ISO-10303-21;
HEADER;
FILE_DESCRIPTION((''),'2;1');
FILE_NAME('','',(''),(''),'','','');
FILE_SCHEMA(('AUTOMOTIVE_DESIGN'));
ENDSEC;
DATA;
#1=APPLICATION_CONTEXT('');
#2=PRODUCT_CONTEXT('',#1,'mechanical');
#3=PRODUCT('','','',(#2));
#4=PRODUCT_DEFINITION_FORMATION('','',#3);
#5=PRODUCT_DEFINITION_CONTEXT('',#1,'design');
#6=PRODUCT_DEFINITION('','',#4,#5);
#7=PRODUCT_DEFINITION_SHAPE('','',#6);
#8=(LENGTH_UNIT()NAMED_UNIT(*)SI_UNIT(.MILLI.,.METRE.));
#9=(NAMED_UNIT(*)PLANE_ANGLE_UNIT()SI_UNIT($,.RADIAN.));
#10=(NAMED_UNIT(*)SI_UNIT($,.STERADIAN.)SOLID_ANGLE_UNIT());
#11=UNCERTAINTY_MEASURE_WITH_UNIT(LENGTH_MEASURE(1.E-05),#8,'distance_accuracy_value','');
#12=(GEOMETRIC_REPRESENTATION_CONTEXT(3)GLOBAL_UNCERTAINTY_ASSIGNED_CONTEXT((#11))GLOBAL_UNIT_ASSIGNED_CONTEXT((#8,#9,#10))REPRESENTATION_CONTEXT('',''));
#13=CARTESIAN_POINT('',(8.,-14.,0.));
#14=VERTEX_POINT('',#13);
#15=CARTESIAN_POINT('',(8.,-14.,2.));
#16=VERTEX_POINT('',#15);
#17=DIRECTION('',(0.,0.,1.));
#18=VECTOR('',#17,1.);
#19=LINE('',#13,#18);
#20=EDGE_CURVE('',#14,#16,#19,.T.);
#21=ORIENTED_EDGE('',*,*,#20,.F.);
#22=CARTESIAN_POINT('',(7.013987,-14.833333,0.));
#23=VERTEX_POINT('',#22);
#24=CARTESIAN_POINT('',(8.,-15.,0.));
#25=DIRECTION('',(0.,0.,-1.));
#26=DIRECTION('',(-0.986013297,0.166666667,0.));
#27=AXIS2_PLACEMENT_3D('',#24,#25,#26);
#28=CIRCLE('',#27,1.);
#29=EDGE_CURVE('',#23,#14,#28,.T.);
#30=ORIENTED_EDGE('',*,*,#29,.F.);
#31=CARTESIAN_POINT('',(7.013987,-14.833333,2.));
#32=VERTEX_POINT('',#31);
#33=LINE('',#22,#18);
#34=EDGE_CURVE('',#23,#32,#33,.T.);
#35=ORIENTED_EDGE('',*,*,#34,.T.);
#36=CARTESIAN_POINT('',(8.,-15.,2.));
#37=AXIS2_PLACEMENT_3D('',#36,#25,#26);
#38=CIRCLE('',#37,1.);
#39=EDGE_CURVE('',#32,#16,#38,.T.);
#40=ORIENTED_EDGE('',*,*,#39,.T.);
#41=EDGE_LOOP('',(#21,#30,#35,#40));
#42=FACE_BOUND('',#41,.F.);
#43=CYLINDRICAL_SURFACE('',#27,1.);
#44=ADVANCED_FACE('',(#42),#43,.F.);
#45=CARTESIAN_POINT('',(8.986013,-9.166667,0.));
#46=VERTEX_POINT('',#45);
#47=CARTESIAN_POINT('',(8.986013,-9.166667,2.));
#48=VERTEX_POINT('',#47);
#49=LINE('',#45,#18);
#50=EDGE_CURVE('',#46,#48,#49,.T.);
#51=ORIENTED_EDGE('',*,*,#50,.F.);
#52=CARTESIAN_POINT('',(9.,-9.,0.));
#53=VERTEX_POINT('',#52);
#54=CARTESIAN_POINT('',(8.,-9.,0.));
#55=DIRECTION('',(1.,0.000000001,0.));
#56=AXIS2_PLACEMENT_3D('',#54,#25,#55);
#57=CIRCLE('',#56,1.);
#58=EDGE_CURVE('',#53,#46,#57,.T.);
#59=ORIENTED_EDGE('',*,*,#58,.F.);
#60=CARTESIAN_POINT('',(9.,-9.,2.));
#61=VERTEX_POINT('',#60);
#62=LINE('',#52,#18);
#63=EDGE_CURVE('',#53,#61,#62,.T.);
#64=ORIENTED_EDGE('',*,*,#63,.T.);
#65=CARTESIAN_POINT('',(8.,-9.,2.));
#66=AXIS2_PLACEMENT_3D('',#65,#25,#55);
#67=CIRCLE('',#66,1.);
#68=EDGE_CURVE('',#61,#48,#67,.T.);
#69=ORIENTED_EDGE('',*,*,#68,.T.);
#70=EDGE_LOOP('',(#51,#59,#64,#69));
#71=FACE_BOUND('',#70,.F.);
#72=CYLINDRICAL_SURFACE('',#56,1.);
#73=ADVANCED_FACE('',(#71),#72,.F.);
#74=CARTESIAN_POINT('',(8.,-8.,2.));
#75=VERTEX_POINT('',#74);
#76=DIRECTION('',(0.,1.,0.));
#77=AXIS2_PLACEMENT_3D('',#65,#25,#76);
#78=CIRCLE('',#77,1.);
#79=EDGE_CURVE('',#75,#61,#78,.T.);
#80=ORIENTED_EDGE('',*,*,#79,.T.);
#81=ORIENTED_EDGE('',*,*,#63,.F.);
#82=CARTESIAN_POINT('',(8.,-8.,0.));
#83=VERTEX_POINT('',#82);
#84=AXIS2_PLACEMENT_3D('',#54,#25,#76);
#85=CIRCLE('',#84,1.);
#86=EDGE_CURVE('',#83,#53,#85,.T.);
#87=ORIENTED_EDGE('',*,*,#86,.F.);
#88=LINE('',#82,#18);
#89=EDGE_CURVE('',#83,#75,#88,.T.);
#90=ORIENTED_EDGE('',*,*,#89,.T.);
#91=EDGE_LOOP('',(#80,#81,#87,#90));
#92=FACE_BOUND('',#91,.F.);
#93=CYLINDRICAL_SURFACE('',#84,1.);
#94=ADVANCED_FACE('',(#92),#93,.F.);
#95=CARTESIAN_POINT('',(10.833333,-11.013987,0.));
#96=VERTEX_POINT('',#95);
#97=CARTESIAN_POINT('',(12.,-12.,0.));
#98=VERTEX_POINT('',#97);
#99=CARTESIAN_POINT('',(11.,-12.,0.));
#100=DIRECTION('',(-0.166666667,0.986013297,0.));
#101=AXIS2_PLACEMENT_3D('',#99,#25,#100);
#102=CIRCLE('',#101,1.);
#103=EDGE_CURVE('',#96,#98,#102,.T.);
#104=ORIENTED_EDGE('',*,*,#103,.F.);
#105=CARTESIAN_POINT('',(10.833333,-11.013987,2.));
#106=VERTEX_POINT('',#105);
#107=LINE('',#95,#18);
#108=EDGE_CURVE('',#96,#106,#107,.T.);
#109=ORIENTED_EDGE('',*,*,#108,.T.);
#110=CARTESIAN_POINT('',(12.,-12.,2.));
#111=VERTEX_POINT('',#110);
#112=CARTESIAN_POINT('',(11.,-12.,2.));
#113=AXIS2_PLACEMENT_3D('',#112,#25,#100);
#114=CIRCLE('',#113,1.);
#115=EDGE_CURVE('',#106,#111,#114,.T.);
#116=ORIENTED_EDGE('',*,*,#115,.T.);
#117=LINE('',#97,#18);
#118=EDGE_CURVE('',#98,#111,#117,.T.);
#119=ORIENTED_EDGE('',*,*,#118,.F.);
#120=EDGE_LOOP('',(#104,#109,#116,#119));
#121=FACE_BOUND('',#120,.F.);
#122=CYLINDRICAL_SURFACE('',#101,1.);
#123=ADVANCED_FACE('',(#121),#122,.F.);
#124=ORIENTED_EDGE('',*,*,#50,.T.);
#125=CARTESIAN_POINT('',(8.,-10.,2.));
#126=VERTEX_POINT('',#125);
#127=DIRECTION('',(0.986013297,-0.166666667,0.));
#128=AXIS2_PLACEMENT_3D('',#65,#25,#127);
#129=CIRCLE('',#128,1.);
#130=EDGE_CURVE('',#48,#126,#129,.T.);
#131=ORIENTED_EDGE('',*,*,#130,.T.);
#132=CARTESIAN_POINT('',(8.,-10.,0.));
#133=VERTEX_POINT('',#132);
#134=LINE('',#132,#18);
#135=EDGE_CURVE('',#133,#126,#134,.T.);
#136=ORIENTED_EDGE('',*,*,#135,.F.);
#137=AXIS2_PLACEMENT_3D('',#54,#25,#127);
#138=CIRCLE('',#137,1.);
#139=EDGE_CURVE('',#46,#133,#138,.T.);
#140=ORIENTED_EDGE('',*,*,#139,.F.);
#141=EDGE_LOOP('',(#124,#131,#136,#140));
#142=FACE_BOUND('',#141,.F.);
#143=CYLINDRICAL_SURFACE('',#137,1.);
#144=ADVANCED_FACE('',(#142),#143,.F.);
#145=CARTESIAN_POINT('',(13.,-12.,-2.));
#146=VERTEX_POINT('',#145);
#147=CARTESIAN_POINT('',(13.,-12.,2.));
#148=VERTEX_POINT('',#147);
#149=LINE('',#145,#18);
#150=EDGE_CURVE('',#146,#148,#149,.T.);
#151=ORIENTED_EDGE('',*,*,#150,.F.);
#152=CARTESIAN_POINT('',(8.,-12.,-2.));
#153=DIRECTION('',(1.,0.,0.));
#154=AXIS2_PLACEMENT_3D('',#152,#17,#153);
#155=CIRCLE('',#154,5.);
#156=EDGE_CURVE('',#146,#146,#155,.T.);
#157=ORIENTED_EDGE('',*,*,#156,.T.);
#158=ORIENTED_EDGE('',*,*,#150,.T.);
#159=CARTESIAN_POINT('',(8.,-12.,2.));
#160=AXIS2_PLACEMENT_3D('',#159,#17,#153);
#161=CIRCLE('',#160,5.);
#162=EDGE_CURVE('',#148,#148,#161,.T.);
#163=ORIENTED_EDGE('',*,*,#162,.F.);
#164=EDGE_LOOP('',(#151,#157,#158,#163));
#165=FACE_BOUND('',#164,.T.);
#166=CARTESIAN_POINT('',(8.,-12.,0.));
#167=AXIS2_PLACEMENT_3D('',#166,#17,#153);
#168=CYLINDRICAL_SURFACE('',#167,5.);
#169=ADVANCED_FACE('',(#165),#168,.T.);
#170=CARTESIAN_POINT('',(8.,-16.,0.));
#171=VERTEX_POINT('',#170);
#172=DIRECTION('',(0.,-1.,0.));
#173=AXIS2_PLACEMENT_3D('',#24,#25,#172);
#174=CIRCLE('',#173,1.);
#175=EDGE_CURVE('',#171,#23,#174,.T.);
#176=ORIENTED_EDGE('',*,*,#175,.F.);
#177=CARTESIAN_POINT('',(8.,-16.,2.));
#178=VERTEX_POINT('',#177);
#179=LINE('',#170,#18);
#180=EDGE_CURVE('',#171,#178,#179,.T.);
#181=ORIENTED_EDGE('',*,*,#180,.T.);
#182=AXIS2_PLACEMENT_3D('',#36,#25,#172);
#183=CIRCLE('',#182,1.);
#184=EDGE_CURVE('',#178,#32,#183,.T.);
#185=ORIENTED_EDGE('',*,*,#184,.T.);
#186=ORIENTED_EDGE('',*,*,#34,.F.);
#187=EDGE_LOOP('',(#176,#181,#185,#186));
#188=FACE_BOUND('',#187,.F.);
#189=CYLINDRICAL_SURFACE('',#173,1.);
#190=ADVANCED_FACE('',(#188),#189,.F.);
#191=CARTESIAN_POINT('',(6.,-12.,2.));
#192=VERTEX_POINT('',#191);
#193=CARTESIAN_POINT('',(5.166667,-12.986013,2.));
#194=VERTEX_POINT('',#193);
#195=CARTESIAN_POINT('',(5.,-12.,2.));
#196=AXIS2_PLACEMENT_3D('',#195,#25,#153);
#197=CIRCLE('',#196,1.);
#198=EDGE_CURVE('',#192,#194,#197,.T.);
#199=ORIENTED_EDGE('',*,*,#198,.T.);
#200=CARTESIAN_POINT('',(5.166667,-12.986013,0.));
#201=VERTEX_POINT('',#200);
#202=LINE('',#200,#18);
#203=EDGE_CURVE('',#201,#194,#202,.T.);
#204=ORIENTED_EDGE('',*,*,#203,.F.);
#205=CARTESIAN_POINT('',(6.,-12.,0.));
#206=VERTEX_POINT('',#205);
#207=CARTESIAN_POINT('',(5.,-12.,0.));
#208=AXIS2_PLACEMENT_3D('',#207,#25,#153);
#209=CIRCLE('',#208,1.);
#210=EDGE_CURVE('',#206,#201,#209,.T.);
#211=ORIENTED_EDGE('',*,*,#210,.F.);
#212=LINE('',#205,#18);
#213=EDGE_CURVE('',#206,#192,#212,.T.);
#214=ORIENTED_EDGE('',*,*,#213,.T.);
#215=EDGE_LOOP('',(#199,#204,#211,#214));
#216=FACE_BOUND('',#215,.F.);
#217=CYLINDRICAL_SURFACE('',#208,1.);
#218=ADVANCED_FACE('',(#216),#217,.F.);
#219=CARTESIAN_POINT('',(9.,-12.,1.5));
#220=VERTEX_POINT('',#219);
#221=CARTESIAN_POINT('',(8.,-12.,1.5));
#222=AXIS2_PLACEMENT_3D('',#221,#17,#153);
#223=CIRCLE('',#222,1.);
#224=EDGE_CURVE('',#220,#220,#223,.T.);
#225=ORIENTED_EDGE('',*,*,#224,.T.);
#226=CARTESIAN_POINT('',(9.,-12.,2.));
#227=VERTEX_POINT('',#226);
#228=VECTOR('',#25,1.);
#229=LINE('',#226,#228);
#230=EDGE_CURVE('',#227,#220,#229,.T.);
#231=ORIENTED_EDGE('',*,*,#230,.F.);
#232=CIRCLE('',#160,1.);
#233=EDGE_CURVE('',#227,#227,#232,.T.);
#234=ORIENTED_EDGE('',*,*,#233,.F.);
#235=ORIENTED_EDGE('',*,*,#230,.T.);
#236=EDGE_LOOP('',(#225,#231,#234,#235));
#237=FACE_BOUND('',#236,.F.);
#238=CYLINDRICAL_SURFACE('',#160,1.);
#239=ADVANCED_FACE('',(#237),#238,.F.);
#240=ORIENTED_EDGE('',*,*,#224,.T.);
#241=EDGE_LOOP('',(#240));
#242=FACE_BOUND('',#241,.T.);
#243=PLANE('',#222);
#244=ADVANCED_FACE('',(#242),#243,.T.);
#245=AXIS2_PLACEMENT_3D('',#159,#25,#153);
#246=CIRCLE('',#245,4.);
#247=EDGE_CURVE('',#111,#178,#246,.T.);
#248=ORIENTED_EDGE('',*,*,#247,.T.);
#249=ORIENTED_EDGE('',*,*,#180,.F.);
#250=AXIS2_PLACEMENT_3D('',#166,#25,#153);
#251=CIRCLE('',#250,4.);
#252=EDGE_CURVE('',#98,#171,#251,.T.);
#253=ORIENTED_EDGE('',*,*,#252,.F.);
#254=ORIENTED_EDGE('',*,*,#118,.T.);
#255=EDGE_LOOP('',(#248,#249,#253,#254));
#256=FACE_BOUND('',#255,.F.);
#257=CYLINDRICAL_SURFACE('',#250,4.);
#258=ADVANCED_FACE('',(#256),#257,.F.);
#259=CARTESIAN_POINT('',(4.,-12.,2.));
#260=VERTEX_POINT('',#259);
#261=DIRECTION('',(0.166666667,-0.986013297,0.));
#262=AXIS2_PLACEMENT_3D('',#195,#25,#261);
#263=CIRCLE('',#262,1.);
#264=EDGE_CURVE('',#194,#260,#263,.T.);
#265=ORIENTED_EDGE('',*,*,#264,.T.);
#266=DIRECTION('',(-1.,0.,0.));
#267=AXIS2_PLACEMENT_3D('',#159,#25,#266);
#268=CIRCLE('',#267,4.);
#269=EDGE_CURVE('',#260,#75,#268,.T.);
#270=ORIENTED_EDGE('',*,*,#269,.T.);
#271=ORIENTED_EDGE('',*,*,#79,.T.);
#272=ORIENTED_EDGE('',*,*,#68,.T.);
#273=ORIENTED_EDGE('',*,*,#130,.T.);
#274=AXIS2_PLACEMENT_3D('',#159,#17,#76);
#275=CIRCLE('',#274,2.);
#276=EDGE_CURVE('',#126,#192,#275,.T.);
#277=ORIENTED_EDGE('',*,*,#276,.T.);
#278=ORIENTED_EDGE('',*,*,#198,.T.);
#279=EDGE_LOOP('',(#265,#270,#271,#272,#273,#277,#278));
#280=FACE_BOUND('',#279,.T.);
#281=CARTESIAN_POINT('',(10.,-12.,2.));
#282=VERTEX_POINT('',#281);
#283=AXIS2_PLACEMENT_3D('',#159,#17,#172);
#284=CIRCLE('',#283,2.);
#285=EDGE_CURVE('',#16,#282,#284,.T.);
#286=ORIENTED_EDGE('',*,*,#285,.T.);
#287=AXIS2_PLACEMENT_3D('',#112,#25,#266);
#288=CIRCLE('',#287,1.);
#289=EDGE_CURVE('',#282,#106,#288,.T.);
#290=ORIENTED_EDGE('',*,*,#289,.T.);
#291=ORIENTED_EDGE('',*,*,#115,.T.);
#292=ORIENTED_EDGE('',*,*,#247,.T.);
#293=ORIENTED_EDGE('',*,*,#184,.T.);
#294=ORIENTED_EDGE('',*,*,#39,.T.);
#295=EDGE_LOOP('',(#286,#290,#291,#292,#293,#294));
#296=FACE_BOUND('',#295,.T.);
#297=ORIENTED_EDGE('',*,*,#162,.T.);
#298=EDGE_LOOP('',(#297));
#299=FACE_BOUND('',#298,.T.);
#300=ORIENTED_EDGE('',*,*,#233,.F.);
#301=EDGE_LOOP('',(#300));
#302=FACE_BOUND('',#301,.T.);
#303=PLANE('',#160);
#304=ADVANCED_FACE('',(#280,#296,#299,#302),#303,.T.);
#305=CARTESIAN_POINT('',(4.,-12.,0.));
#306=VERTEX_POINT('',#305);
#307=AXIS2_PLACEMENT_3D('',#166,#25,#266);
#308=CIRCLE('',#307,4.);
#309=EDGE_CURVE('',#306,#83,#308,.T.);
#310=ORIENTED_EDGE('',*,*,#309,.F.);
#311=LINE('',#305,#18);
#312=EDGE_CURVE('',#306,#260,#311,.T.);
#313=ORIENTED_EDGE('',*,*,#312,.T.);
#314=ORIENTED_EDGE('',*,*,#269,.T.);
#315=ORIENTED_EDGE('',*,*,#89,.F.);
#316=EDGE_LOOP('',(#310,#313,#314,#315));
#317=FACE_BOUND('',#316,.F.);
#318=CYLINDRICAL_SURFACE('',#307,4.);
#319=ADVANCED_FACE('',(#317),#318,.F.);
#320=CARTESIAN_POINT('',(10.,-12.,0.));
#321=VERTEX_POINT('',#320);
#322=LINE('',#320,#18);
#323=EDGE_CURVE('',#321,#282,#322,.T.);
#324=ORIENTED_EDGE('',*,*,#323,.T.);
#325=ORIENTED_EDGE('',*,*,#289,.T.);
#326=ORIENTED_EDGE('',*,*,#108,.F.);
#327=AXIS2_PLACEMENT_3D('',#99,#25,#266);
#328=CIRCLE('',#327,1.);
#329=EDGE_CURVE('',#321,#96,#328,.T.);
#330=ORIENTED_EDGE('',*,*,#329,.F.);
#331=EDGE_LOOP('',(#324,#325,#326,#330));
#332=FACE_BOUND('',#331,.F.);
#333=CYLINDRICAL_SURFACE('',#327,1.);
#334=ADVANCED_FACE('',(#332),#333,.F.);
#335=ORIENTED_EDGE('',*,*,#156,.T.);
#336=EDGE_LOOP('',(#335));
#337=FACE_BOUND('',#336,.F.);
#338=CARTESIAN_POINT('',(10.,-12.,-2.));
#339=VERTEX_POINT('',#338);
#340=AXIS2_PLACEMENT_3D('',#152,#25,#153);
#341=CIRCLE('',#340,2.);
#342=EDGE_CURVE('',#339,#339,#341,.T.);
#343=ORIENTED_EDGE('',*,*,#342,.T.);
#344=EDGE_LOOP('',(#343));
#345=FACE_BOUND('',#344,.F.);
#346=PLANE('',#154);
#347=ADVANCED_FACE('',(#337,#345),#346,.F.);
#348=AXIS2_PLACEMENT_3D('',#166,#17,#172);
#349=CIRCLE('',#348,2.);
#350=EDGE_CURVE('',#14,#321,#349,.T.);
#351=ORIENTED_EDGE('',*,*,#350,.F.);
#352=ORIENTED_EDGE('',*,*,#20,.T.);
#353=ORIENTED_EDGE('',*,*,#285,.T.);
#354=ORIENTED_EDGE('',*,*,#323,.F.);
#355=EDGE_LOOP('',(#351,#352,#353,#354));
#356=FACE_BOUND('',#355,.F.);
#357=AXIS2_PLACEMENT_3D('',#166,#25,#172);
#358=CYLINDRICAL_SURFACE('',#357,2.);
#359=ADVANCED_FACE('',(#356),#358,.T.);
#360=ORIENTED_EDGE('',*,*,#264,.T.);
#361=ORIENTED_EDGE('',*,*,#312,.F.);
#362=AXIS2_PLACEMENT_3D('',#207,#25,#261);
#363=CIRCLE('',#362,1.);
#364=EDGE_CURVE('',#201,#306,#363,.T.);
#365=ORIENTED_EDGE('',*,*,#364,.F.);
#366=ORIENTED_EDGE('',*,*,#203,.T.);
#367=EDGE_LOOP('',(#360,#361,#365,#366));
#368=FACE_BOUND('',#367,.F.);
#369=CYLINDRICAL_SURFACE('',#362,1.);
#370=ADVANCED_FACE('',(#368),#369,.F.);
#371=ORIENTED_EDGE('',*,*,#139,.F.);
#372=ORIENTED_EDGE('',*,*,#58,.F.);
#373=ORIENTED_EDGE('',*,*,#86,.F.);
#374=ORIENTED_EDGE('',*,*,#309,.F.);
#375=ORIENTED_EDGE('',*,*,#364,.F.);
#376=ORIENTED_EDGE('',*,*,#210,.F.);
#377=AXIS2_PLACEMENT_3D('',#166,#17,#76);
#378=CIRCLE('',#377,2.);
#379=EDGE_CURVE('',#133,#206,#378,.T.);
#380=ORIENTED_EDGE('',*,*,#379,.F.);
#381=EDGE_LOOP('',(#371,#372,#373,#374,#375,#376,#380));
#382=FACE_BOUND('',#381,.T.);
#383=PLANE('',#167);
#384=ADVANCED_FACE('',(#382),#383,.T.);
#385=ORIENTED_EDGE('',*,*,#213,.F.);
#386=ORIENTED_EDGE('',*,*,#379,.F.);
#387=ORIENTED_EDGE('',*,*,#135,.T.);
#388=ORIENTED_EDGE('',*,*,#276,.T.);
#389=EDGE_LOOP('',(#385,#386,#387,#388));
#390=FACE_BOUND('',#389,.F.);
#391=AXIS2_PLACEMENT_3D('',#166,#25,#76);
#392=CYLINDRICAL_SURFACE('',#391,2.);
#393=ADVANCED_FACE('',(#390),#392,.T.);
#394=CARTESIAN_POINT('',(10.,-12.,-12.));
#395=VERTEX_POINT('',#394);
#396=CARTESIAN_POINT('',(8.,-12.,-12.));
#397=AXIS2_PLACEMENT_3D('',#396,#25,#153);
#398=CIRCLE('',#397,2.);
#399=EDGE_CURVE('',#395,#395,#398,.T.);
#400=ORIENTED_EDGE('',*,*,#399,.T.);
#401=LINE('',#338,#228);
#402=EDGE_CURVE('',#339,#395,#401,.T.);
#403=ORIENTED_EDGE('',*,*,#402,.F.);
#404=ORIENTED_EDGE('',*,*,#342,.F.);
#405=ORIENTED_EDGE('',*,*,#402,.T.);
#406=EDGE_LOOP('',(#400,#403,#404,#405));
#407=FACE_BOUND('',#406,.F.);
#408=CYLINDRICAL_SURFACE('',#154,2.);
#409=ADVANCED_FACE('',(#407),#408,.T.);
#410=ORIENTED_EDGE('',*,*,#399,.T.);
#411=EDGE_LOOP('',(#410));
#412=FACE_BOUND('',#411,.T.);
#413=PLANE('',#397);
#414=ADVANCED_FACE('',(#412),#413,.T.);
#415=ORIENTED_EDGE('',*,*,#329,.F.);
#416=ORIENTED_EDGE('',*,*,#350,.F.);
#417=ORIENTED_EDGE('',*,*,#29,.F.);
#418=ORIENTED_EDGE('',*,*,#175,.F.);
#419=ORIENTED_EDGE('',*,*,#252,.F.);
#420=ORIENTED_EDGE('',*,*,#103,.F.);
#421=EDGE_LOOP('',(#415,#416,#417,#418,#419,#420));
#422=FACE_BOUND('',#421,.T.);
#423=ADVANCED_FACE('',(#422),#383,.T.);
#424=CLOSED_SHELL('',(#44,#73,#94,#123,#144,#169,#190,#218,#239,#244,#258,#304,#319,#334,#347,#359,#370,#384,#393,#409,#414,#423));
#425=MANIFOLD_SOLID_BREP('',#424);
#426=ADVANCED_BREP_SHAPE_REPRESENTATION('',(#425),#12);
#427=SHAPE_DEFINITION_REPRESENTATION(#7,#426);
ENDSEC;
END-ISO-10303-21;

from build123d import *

# Parameters (mm, degrees)
F0_R     = 5
F0_R_2   = 1.5
F1_DEPTH = 2
F2_DEPTH = 2
F3_DEPTH = 2
F4_R     = 2
F4_R_2   = 1.5
F5_DEPTH = 10
F6_R     = 1
F7_DEPTH = 0.5


with BuildPart() as f1:
    # F0 (on Top) → F1 (new body)
    with BuildSketch(Plane.XY):
        with Locations((8, -12)):
            Circle(F0_R)
        with BuildLine():
            ThreePointArc((12, -12), (10.8284271247, -14.8284271247), (8, -16))
            ThreePointArc((8, -16), (7.2362373842, -15.6454972244), (7.0139867028, -14.8333333333))
            ThreePointArc((7.0139867028, -14.8333333333), (7.3545027756, -14.2362373842), (8, -14))
            ThreePointArc((8, -14), (9.4142135624, -13.4142135624), (10, -12))
            ThreePointArc((10, -12), (10.2362373842, -11.3545027756), (10.8333333333, -11.0139867028))
            ThreePointArc((10.8333333333, -11.0139867028), (11.6454972244, -11.2362373842), (12, -12))
        make_face(mode=Mode.SUBTRACT)
        with BuildLine():
            ThreePointArc((8, -10), (6.5857864376, -10.5857864376), (6, -12))
            ThreePointArc((6, -12), (5.7637626158, -12.6454972244), (5.1666666667, -12.9860132972))
            ThreePointArc((5.1666666667, -12.9860132972), (4.3545027756, -12.7637626158), (4, -12))
            ThreePointArc((4, -12), (5.1715728753, -9.1715728753), (8, -8))
            ThreePointArc((8, -8), (8.7071067812, -8.2928932188), (9, -9))
            ThreePointArc((9, -9), (8.9964971895, -9.0836262603), (8.9860132972, -9.1666666667))
            ThreePointArc((8.9860132972, -9.1666666667), (8.6454972244, -9.7637626158), (8, -10))
        make_face(mode=Mode.SUBTRACT)
        with Locations((8, -12)):
            Circle(F0_R_2, mode=Mode.SUBTRACT)
        with Locations((8, -12)):
            Circle(F0_R_2)
    extrude(amount=F1_DEPTH)

    # F0 (on Top) → F2 (join)
    with BuildSketch(Plane.XY):
        with Locations((8, -12)):
            Circle(F0_R)
        with BuildLine():
            ThreePointArc((12, -12), (10.8284271247, -14.8284271247), (8, -16))
            ThreePointArc((8, -16), (7.2362373842, -15.6454972244), (7.0139867028, -14.8333333333))
            ThreePointArc((7.0139867028, -14.8333333333), (7.3545027756, -14.2362373842), (8, -14))
            ThreePointArc((8, -14), (9.4142135624, -13.4142135624), (10, -12))
            ThreePointArc((10, -12), (10.2362373842, -11.3545027756), (10.8333333333, -11.0139867028))
            ThreePointArc((10.8333333333, -11.0139867028), (11.6454972244, -11.2362373842), (12, -12))
        make_face(mode=Mode.SUBTRACT)
        with BuildLine():
            ThreePointArc((8, -10), (6.5857864376, -10.5857864376), (6, -12))
            ThreePointArc((6, -12), (5.7637626158, -12.6454972244), (5.1666666667, -12.9860132972))
            ThreePointArc((5.1666666667, -12.9860132972), (4.3545027756, -12.7637626158), (4, -12))
            ThreePointArc((4, -12), (5.1715728753, -9.1715728753), (8, -8))
            ThreePointArc((8, -8), (8.7071067812, -8.2928932188), (9, -9))
            ThreePointArc((9, -9), (8.9964971895, -9.0836262603), (8.9860132972, -9.1666666667))
            ThreePointArc((8.9860132972, -9.1666666667), (8.6454972244, -9.7637626158), (8, -10))
        make_face(mode=Mode.SUBTRACT)
        with Locations((8, -12)):
            Circle(F0_R_2, mode=Mode.SUBTRACT)
        with BuildLine():
            ThreePointArc((9, -15), (8.7071067812, -15.7071067812), (8, -16))
            ThreePointArc((8, -16), (10.8284271247, -14.8284271247), (12, -12))
            ThreePointArc((12, -12), (11.6454972244, -12.7637626158), (10.8333333333, -12.9860132972))
            ThreePointArc((10.8333333333, -12.9860132972), (10.1213203436, -14.1213203436), (8.9860132972, -14.8333333333))
            ThreePointArc((8.9860132972, -14.8333333333), (8.9964971895, -14.9163737397), (9, -15))
        make_face()
        with BuildLine():
            ThreePointArc((8.9860132972, -14.8333333333), (10.1213203436, -14.1213203436), (10.8333333333, -12.9860132972))
            ThreePointArc((10.8333333333, -12.9860132972), (10.2362373842, -12.6454972244), (10, -12))
            ThreePointArc((10, -12), (9.4142135624, -13.4142135624), (8, -14))
            ThreePointArc((8, -14), (8.6454972244, -14.2362373842), (8.9860132972, -14.8333333333))
        make_face()
        with BuildLine():
            ThreePointArc((10.8333333333, -12.9860132972), (11.6454972244, -12.7637626158), (12, -12))
            ThreePointArc((12, -12), (11.6454972244, -11.2362373842), (10.8333333333, -11.0139867028))
            ThreePointArc((10.8333333333, -11.0139867028), (11, -12), (10.8333333333, -12.9860132972))
        make_face()
        with BuildLine():
            ThreePointArc((10.8333333333, -12.9860132972), (11, -12), (10.8333333333, -11.0139867028))
            ThreePointArc((10.8333333333, -11.0139867028), (10.2362373842, -11.3545027756), (10, -12))
            ThreePointArc((10, -12), (10.2362373842, -12.6454972244), (10.8333333333, -12.9860132972))
        make_face()
        with BuildLine():
            ThreePointArc((8, -14), (7.3545027756, -14.2362373842), (7.0139867028, -14.8333333333))
            ThreePointArc((7.0139867028, -14.8333333333), (8, -15), (8.9860132972, -14.8333333333))
            ThreePointArc((8.9860132972, -14.8333333333), (8.6454972244, -14.2362373842), (8, -14))
        make_face()
        with BuildLine():
            ThreePointArc((7.0139867028, -14.8333333333), (7.2362373842, -15.6454972244), (8, -16))
            ThreePointArc((8, -16), (8.7071067812, -15.7071067812), (9, -15))
            ThreePointArc((9, -15), (8.9964971895, -14.9163737397), (8.9860132972, -14.8333333333))
            ThreePointArc((8.9860132972, -14.8333333333), (8, -15), (7.0139867028, -14.8333333333))
        make_face()
        with BuildLine():
            ThreePointArc((7.0139867028, -9.1666666667), (7.3545027756, -9.7637626158), (8, -10))
            ThreePointArc((8, -10), (8.6454972244, -9.7637626158), (8.9860132972, -9.1666666667))
            ThreePointArc((8.9860132972, -9.1666666667), (8, -9), (7.0139867028, -9.1666666667))
        make_face()
        with BuildLine():
            ThreePointArc((8, -8), (7.2362373842, -8.3545027756), (7.0139867028, -9.1666666667))
            ThreePointArc((7.0139867028, -9.1666666667), (8, -9), (8.9860132972, -9.1666666667))
            ThreePointArc((8.9860132972, -9.1666666667), (8.9964971895, -9.0836262603), (9, -9))
            ThreePointArc((9, -9), (8.7071067812, -8.2928932188), (8, -8))
        make_face()
        with BuildLine():
            ThreePointArc((5.1666666667, -11.0139867028), (5.7637626158, -11.3545027756), (6, -12))
            ThreePointArc((6, -12), (6.5857864376, -10.5857864376), (8, -10))
            ThreePointArc((8, -10), (7.3545027756, -9.7637626158), (7.0139867028, -9.1666666667))
            ThreePointArc((7.0139867028, -9.1666666667), (7.2362373842, -8.3545027756), (8, -8))
            ThreePointArc((8, -8), (5.1715728753, -9.1715728753), (4, -12))
            ThreePointArc((4, -12), (4.3545027756, -11.2362373842), (5.1666666667, -11.0139867028))
        make_face()
        with BuildLine():
            ThreePointArc((5.1666666667, -12.9860132972), (5.7637626158, -12.6454972244), (6, -12))
            ThreePointArc((6, -12), (5.7637626158, -11.3545027756), (5.1666666667, -11.0139867028))
            ThreePointArc((5.1666666667, -11.0139867028), (5, -12), (5.1666666667, -12.9860132972))
        make_face()
        with BuildLine():
            ThreePointArc((5.1666666667, -12.9860132972), (5, -12), (5.1666666667, -11.0139867028))
            ThreePointArc((5.1666666667, -11.0139867028), (4.3545027756, -11.2362373842), (4, -12))
            ThreePointArc((4, -12), (4.3545027756, -12.7637626158), (5.1666666667, -12.9860132972))
        make_face()
    extrude(amount=-F2_DEPTH)

    # F0 (on Top) → F3 (join)
    with BuildSketch(Plane.XY):
        with Locations((8, -12)):
            Circle(F0_R_2)
    extrude(amount=-F3_DEPTH)

    # F4 (on face) → F5 (join)
    with BuildSketch(Plane(origin=(0, 0, -2), x_dir=(1, 0, 0), z_dir=(0, 0, -1))):
        with Locations((8, 12)):
            Circle(F4_R)
        with Locations((8, 12)):
            Circle(F4_R_2, mode=Mode.SUBTRACT)
        with Locations((8, 12)):
            Circle(F4_R_2)
    extrude(amount=F5_DEPTH)

    # F6 (on face) → F7 (cut)
    with BuildSketch(Plane.XY.offset(2)):
        with Locations((8, -12)):
            Circle(F6_R)
    extrude(amount=-F7_DEPTH, mode=Mode.SUBTRACT)


solid = f1.part
